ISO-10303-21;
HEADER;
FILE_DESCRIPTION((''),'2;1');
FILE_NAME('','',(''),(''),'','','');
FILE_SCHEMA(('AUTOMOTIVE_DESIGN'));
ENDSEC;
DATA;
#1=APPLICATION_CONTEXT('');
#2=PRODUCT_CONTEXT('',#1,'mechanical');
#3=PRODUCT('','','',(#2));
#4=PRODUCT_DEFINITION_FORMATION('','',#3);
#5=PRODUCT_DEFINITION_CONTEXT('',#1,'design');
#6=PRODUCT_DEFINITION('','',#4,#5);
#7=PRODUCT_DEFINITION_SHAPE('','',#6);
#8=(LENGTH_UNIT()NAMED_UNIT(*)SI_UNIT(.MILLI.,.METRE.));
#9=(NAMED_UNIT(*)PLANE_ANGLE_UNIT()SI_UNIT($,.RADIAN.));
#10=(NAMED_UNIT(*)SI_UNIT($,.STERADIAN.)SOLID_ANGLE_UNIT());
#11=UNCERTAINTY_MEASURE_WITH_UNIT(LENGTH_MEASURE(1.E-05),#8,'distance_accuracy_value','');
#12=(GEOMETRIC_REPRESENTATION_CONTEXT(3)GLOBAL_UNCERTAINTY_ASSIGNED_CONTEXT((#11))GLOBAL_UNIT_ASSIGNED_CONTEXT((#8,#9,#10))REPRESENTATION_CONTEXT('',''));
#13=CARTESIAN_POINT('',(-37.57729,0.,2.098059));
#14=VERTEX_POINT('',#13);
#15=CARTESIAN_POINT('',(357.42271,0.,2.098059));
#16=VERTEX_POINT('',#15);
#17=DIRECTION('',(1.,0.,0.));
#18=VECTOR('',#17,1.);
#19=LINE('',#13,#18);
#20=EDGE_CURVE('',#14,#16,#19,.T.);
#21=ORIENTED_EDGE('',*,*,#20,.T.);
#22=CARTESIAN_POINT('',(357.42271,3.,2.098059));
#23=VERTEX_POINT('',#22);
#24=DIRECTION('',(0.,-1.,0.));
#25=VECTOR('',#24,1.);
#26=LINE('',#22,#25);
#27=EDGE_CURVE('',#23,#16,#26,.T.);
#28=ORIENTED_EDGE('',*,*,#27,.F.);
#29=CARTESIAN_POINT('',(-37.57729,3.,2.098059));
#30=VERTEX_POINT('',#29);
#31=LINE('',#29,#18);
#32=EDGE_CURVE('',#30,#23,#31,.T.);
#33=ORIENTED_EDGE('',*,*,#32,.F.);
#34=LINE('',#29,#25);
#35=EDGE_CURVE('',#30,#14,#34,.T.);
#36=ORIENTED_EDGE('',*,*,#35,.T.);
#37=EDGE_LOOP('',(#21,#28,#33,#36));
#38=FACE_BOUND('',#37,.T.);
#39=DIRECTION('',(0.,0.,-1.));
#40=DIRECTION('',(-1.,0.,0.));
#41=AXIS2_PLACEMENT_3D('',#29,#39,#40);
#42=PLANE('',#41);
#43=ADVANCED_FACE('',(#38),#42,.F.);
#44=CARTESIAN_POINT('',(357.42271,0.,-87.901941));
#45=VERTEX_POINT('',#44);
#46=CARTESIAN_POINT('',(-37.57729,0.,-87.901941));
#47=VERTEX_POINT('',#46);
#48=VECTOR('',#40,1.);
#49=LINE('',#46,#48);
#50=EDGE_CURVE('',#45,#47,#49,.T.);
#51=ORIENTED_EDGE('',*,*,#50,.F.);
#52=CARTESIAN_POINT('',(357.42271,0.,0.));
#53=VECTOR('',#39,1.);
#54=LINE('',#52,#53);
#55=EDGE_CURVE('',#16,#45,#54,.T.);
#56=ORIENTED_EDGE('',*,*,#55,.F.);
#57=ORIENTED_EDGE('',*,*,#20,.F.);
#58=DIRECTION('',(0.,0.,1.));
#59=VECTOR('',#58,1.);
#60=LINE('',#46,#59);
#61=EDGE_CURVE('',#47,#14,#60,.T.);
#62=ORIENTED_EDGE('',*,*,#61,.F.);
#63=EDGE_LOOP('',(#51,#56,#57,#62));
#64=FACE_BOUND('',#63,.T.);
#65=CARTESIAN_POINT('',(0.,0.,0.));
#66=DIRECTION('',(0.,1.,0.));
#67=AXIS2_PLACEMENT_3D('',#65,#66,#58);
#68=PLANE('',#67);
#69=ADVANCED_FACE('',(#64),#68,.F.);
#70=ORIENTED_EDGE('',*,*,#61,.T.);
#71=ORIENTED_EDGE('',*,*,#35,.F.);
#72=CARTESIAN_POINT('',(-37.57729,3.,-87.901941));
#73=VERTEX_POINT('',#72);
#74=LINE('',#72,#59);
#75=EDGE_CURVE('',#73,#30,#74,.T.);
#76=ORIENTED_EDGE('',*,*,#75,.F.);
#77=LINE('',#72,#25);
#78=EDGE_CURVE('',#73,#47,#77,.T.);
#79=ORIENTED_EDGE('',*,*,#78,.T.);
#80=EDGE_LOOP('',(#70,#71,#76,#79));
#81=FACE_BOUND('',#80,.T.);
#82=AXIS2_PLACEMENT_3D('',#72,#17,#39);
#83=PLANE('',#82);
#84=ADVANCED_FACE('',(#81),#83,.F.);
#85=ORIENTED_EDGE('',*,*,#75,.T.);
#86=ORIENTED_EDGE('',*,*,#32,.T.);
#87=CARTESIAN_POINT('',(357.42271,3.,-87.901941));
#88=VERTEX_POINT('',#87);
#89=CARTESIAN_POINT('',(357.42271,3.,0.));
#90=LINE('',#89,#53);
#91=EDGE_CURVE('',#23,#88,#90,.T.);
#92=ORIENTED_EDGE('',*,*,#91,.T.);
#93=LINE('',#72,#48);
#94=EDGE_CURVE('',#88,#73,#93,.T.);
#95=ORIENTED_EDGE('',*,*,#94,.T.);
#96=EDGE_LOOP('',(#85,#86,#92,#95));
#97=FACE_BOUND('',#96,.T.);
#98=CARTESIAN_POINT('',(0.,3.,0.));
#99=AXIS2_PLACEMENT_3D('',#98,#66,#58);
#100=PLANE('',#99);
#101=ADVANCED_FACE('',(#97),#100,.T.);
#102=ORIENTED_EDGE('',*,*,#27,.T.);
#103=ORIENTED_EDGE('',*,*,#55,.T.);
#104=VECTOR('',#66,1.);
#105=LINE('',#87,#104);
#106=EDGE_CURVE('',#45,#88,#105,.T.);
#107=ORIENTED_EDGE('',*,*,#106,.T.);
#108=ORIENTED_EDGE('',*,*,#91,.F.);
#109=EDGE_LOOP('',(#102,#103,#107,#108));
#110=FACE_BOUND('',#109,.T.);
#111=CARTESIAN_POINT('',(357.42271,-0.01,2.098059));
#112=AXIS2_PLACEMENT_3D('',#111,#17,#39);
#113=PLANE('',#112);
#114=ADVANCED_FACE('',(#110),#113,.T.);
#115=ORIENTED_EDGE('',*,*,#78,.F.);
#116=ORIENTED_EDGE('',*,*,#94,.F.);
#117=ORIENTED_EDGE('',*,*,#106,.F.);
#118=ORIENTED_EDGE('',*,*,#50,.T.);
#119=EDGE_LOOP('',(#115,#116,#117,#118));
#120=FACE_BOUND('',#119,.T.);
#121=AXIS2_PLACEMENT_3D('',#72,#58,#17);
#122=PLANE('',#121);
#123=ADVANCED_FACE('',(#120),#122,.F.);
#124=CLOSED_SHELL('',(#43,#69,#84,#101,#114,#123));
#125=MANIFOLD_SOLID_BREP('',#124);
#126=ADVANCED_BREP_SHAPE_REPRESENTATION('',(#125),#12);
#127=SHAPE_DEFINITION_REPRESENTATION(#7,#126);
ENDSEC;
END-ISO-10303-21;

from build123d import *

# Parameters (mm, degrees)
SKETCH1_W           = 790
SKETCH1_H           = 90
BOSS_EXTRUDE1_DEPTH = 3
SPLIT1_START        = 357.422709601
SPLIT1_OUTLINE_W    = 3
SPLIT1_OUTLINE_H    = 90
SPLIT1_DEPTH        = 395


# Read off the part's stored shape, not the designer's step: Split1
with BuildPart() as part:
    # Sketch1 → Boss-Extrude1 (new body)
    with BuildSketch(Plane(origin=(0, 0, 0), x_dir=(1, 0, 0), z_dir=(0, 1, 0))):
        with Locations((357.422709601, 42.901940756)):
            Rectangle(SKETCH1_W, SKETCH1_H)
    extrude(amount=BOSS_EXTRUDE1_DEPTH)

    # Split1 outline → Split1 (cut)
    with BuildSketch(Plane.YZ.offset(SPLIT1_START)):
        with Locations((1.5, -42.901940756)):
            Rectangle(SPLIT1_OUTLINE_W, SPLIT1_OUTLINE_H)
    extrude(amount=SPLIT1_DEPTH, mode=Mode.SUBTRACT)


solid = part.part
